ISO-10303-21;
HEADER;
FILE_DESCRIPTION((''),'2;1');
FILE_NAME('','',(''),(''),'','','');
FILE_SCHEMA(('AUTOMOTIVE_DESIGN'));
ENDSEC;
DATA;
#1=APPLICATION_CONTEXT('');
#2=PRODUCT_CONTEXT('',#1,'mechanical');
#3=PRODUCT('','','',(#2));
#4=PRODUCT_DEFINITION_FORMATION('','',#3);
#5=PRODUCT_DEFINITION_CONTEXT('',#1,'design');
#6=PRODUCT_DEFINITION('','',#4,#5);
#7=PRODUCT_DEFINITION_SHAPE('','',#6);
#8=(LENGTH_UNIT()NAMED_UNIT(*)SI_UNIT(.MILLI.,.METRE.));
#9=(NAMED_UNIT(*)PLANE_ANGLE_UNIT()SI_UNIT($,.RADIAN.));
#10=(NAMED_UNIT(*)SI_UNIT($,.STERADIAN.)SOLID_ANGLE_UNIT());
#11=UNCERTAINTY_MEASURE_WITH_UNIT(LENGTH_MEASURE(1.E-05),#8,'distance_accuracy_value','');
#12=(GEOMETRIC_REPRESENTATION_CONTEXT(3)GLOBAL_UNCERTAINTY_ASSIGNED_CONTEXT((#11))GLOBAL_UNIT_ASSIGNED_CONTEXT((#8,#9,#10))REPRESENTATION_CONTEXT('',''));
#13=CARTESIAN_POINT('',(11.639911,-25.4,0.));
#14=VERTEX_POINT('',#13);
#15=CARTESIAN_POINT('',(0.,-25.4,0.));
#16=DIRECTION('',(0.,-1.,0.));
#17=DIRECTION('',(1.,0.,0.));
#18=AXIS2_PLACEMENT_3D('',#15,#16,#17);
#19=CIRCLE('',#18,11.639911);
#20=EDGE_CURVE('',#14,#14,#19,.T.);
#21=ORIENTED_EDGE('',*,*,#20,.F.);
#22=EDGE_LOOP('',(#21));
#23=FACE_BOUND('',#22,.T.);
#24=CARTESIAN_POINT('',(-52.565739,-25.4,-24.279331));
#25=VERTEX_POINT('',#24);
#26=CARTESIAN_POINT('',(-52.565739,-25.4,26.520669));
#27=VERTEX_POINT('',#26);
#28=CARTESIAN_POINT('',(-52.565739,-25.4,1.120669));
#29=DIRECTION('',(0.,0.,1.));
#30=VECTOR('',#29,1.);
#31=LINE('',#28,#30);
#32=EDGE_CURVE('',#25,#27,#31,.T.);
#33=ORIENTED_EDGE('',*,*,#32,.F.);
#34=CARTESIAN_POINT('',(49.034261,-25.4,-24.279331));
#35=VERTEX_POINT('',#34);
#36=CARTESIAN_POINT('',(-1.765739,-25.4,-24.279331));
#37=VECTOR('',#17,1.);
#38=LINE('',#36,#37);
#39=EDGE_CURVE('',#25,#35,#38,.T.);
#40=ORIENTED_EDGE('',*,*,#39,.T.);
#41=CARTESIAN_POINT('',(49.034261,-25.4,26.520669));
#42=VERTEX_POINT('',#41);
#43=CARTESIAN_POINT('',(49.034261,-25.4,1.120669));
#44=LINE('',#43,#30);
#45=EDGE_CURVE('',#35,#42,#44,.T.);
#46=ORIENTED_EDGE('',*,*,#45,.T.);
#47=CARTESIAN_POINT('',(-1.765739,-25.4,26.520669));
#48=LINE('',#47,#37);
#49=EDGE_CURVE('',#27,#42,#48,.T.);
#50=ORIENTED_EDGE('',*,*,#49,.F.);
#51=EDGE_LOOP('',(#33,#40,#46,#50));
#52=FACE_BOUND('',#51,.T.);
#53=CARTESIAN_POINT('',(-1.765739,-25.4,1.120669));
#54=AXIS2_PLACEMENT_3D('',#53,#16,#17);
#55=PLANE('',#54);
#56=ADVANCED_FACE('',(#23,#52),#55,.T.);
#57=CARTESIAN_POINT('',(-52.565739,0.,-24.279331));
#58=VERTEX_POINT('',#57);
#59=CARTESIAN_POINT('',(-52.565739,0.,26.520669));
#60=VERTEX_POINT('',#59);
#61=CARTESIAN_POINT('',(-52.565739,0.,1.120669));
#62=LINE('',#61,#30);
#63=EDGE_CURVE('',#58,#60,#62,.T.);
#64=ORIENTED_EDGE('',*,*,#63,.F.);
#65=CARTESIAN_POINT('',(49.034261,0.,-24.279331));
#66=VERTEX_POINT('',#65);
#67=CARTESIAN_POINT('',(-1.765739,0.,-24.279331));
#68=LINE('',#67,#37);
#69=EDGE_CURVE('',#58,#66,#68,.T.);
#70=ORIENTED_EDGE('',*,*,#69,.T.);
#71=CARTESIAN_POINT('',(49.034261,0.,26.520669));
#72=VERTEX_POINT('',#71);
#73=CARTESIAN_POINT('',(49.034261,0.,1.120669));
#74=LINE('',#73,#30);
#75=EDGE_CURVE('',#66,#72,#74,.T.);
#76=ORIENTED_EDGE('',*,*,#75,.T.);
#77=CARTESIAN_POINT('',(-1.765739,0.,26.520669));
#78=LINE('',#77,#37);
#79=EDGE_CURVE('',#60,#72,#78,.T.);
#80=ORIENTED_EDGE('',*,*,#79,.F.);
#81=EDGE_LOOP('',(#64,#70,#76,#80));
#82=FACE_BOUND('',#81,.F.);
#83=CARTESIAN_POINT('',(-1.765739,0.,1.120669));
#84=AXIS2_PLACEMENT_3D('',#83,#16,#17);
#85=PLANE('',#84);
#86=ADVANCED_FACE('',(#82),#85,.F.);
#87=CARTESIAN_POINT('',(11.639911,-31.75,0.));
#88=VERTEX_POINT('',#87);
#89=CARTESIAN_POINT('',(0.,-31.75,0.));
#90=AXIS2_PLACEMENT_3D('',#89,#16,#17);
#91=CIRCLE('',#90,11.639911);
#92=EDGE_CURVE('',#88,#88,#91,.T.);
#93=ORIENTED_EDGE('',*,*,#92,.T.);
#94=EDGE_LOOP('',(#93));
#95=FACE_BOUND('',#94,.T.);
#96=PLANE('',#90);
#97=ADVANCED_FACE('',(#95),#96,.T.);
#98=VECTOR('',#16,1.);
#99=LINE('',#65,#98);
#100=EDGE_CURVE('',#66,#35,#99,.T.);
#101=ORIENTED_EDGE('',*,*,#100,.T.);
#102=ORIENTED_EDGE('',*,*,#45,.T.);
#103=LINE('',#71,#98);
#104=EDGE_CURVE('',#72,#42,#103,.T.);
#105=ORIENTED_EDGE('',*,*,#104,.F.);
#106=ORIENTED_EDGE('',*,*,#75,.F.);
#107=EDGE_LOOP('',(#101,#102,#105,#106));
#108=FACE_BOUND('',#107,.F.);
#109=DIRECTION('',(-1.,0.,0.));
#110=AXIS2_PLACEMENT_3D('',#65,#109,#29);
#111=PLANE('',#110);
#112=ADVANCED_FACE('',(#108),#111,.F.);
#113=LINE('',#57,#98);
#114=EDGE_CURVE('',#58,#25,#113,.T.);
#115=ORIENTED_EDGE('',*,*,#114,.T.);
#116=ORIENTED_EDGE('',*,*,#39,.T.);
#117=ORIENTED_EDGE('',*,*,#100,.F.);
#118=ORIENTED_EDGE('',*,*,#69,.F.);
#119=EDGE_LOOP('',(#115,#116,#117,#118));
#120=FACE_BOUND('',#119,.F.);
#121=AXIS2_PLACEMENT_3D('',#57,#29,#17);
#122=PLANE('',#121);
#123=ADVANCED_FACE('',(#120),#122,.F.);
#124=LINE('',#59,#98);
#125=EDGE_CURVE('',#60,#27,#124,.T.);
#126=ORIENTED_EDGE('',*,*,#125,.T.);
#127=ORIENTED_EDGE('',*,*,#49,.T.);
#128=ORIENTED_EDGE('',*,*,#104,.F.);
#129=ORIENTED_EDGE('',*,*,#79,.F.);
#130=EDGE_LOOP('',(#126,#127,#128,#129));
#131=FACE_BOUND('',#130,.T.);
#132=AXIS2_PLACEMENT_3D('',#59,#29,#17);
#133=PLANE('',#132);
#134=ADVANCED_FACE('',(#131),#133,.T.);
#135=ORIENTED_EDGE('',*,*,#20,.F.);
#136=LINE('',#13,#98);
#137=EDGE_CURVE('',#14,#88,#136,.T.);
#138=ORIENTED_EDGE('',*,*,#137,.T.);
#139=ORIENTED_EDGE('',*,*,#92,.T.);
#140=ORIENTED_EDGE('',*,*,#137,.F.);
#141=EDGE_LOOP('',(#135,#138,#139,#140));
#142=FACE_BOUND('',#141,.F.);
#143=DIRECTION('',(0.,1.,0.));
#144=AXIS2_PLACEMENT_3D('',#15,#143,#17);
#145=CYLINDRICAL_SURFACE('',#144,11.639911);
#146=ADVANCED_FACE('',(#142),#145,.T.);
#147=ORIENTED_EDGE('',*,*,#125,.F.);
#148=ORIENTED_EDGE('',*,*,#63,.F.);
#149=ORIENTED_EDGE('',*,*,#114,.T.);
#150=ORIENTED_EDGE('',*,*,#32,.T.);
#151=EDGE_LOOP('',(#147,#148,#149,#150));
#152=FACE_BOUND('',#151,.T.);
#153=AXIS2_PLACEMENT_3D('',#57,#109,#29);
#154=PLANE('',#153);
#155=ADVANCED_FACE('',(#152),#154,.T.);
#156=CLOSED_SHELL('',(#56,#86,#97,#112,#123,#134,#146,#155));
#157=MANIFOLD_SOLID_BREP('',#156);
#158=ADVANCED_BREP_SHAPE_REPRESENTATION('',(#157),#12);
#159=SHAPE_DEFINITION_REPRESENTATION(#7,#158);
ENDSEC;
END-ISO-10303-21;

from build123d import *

# Parameters (mm, degrees)
F0_W     = 101.6
F0_H     = 50.8
F1_DEPTH = 25.4
F2_R     = 11.6399110946
F3_DEPTH = 6.35


# Not quite as in the source:
# - a feature of the source that left no trace in its solid (it failed there, or was rolled back) is left out


with BuildPart() as f1:
    # F0 (on Front) → F1 (new body)
    with BuildSketch(Plane.XZ):
        with Locations((-1.7657391727, 1.1206692427)):
            Rectangle(F0_W, F0_H)
    extrude(amount=F1_DEPTH)

    # F2 (on face) → F3 (join)
    with BuildSketch(Plane.XZ.offset(25.4)):
        Circle(F2_R)
    extrude(amount=F3_DEPTH)


solid = f1.part
